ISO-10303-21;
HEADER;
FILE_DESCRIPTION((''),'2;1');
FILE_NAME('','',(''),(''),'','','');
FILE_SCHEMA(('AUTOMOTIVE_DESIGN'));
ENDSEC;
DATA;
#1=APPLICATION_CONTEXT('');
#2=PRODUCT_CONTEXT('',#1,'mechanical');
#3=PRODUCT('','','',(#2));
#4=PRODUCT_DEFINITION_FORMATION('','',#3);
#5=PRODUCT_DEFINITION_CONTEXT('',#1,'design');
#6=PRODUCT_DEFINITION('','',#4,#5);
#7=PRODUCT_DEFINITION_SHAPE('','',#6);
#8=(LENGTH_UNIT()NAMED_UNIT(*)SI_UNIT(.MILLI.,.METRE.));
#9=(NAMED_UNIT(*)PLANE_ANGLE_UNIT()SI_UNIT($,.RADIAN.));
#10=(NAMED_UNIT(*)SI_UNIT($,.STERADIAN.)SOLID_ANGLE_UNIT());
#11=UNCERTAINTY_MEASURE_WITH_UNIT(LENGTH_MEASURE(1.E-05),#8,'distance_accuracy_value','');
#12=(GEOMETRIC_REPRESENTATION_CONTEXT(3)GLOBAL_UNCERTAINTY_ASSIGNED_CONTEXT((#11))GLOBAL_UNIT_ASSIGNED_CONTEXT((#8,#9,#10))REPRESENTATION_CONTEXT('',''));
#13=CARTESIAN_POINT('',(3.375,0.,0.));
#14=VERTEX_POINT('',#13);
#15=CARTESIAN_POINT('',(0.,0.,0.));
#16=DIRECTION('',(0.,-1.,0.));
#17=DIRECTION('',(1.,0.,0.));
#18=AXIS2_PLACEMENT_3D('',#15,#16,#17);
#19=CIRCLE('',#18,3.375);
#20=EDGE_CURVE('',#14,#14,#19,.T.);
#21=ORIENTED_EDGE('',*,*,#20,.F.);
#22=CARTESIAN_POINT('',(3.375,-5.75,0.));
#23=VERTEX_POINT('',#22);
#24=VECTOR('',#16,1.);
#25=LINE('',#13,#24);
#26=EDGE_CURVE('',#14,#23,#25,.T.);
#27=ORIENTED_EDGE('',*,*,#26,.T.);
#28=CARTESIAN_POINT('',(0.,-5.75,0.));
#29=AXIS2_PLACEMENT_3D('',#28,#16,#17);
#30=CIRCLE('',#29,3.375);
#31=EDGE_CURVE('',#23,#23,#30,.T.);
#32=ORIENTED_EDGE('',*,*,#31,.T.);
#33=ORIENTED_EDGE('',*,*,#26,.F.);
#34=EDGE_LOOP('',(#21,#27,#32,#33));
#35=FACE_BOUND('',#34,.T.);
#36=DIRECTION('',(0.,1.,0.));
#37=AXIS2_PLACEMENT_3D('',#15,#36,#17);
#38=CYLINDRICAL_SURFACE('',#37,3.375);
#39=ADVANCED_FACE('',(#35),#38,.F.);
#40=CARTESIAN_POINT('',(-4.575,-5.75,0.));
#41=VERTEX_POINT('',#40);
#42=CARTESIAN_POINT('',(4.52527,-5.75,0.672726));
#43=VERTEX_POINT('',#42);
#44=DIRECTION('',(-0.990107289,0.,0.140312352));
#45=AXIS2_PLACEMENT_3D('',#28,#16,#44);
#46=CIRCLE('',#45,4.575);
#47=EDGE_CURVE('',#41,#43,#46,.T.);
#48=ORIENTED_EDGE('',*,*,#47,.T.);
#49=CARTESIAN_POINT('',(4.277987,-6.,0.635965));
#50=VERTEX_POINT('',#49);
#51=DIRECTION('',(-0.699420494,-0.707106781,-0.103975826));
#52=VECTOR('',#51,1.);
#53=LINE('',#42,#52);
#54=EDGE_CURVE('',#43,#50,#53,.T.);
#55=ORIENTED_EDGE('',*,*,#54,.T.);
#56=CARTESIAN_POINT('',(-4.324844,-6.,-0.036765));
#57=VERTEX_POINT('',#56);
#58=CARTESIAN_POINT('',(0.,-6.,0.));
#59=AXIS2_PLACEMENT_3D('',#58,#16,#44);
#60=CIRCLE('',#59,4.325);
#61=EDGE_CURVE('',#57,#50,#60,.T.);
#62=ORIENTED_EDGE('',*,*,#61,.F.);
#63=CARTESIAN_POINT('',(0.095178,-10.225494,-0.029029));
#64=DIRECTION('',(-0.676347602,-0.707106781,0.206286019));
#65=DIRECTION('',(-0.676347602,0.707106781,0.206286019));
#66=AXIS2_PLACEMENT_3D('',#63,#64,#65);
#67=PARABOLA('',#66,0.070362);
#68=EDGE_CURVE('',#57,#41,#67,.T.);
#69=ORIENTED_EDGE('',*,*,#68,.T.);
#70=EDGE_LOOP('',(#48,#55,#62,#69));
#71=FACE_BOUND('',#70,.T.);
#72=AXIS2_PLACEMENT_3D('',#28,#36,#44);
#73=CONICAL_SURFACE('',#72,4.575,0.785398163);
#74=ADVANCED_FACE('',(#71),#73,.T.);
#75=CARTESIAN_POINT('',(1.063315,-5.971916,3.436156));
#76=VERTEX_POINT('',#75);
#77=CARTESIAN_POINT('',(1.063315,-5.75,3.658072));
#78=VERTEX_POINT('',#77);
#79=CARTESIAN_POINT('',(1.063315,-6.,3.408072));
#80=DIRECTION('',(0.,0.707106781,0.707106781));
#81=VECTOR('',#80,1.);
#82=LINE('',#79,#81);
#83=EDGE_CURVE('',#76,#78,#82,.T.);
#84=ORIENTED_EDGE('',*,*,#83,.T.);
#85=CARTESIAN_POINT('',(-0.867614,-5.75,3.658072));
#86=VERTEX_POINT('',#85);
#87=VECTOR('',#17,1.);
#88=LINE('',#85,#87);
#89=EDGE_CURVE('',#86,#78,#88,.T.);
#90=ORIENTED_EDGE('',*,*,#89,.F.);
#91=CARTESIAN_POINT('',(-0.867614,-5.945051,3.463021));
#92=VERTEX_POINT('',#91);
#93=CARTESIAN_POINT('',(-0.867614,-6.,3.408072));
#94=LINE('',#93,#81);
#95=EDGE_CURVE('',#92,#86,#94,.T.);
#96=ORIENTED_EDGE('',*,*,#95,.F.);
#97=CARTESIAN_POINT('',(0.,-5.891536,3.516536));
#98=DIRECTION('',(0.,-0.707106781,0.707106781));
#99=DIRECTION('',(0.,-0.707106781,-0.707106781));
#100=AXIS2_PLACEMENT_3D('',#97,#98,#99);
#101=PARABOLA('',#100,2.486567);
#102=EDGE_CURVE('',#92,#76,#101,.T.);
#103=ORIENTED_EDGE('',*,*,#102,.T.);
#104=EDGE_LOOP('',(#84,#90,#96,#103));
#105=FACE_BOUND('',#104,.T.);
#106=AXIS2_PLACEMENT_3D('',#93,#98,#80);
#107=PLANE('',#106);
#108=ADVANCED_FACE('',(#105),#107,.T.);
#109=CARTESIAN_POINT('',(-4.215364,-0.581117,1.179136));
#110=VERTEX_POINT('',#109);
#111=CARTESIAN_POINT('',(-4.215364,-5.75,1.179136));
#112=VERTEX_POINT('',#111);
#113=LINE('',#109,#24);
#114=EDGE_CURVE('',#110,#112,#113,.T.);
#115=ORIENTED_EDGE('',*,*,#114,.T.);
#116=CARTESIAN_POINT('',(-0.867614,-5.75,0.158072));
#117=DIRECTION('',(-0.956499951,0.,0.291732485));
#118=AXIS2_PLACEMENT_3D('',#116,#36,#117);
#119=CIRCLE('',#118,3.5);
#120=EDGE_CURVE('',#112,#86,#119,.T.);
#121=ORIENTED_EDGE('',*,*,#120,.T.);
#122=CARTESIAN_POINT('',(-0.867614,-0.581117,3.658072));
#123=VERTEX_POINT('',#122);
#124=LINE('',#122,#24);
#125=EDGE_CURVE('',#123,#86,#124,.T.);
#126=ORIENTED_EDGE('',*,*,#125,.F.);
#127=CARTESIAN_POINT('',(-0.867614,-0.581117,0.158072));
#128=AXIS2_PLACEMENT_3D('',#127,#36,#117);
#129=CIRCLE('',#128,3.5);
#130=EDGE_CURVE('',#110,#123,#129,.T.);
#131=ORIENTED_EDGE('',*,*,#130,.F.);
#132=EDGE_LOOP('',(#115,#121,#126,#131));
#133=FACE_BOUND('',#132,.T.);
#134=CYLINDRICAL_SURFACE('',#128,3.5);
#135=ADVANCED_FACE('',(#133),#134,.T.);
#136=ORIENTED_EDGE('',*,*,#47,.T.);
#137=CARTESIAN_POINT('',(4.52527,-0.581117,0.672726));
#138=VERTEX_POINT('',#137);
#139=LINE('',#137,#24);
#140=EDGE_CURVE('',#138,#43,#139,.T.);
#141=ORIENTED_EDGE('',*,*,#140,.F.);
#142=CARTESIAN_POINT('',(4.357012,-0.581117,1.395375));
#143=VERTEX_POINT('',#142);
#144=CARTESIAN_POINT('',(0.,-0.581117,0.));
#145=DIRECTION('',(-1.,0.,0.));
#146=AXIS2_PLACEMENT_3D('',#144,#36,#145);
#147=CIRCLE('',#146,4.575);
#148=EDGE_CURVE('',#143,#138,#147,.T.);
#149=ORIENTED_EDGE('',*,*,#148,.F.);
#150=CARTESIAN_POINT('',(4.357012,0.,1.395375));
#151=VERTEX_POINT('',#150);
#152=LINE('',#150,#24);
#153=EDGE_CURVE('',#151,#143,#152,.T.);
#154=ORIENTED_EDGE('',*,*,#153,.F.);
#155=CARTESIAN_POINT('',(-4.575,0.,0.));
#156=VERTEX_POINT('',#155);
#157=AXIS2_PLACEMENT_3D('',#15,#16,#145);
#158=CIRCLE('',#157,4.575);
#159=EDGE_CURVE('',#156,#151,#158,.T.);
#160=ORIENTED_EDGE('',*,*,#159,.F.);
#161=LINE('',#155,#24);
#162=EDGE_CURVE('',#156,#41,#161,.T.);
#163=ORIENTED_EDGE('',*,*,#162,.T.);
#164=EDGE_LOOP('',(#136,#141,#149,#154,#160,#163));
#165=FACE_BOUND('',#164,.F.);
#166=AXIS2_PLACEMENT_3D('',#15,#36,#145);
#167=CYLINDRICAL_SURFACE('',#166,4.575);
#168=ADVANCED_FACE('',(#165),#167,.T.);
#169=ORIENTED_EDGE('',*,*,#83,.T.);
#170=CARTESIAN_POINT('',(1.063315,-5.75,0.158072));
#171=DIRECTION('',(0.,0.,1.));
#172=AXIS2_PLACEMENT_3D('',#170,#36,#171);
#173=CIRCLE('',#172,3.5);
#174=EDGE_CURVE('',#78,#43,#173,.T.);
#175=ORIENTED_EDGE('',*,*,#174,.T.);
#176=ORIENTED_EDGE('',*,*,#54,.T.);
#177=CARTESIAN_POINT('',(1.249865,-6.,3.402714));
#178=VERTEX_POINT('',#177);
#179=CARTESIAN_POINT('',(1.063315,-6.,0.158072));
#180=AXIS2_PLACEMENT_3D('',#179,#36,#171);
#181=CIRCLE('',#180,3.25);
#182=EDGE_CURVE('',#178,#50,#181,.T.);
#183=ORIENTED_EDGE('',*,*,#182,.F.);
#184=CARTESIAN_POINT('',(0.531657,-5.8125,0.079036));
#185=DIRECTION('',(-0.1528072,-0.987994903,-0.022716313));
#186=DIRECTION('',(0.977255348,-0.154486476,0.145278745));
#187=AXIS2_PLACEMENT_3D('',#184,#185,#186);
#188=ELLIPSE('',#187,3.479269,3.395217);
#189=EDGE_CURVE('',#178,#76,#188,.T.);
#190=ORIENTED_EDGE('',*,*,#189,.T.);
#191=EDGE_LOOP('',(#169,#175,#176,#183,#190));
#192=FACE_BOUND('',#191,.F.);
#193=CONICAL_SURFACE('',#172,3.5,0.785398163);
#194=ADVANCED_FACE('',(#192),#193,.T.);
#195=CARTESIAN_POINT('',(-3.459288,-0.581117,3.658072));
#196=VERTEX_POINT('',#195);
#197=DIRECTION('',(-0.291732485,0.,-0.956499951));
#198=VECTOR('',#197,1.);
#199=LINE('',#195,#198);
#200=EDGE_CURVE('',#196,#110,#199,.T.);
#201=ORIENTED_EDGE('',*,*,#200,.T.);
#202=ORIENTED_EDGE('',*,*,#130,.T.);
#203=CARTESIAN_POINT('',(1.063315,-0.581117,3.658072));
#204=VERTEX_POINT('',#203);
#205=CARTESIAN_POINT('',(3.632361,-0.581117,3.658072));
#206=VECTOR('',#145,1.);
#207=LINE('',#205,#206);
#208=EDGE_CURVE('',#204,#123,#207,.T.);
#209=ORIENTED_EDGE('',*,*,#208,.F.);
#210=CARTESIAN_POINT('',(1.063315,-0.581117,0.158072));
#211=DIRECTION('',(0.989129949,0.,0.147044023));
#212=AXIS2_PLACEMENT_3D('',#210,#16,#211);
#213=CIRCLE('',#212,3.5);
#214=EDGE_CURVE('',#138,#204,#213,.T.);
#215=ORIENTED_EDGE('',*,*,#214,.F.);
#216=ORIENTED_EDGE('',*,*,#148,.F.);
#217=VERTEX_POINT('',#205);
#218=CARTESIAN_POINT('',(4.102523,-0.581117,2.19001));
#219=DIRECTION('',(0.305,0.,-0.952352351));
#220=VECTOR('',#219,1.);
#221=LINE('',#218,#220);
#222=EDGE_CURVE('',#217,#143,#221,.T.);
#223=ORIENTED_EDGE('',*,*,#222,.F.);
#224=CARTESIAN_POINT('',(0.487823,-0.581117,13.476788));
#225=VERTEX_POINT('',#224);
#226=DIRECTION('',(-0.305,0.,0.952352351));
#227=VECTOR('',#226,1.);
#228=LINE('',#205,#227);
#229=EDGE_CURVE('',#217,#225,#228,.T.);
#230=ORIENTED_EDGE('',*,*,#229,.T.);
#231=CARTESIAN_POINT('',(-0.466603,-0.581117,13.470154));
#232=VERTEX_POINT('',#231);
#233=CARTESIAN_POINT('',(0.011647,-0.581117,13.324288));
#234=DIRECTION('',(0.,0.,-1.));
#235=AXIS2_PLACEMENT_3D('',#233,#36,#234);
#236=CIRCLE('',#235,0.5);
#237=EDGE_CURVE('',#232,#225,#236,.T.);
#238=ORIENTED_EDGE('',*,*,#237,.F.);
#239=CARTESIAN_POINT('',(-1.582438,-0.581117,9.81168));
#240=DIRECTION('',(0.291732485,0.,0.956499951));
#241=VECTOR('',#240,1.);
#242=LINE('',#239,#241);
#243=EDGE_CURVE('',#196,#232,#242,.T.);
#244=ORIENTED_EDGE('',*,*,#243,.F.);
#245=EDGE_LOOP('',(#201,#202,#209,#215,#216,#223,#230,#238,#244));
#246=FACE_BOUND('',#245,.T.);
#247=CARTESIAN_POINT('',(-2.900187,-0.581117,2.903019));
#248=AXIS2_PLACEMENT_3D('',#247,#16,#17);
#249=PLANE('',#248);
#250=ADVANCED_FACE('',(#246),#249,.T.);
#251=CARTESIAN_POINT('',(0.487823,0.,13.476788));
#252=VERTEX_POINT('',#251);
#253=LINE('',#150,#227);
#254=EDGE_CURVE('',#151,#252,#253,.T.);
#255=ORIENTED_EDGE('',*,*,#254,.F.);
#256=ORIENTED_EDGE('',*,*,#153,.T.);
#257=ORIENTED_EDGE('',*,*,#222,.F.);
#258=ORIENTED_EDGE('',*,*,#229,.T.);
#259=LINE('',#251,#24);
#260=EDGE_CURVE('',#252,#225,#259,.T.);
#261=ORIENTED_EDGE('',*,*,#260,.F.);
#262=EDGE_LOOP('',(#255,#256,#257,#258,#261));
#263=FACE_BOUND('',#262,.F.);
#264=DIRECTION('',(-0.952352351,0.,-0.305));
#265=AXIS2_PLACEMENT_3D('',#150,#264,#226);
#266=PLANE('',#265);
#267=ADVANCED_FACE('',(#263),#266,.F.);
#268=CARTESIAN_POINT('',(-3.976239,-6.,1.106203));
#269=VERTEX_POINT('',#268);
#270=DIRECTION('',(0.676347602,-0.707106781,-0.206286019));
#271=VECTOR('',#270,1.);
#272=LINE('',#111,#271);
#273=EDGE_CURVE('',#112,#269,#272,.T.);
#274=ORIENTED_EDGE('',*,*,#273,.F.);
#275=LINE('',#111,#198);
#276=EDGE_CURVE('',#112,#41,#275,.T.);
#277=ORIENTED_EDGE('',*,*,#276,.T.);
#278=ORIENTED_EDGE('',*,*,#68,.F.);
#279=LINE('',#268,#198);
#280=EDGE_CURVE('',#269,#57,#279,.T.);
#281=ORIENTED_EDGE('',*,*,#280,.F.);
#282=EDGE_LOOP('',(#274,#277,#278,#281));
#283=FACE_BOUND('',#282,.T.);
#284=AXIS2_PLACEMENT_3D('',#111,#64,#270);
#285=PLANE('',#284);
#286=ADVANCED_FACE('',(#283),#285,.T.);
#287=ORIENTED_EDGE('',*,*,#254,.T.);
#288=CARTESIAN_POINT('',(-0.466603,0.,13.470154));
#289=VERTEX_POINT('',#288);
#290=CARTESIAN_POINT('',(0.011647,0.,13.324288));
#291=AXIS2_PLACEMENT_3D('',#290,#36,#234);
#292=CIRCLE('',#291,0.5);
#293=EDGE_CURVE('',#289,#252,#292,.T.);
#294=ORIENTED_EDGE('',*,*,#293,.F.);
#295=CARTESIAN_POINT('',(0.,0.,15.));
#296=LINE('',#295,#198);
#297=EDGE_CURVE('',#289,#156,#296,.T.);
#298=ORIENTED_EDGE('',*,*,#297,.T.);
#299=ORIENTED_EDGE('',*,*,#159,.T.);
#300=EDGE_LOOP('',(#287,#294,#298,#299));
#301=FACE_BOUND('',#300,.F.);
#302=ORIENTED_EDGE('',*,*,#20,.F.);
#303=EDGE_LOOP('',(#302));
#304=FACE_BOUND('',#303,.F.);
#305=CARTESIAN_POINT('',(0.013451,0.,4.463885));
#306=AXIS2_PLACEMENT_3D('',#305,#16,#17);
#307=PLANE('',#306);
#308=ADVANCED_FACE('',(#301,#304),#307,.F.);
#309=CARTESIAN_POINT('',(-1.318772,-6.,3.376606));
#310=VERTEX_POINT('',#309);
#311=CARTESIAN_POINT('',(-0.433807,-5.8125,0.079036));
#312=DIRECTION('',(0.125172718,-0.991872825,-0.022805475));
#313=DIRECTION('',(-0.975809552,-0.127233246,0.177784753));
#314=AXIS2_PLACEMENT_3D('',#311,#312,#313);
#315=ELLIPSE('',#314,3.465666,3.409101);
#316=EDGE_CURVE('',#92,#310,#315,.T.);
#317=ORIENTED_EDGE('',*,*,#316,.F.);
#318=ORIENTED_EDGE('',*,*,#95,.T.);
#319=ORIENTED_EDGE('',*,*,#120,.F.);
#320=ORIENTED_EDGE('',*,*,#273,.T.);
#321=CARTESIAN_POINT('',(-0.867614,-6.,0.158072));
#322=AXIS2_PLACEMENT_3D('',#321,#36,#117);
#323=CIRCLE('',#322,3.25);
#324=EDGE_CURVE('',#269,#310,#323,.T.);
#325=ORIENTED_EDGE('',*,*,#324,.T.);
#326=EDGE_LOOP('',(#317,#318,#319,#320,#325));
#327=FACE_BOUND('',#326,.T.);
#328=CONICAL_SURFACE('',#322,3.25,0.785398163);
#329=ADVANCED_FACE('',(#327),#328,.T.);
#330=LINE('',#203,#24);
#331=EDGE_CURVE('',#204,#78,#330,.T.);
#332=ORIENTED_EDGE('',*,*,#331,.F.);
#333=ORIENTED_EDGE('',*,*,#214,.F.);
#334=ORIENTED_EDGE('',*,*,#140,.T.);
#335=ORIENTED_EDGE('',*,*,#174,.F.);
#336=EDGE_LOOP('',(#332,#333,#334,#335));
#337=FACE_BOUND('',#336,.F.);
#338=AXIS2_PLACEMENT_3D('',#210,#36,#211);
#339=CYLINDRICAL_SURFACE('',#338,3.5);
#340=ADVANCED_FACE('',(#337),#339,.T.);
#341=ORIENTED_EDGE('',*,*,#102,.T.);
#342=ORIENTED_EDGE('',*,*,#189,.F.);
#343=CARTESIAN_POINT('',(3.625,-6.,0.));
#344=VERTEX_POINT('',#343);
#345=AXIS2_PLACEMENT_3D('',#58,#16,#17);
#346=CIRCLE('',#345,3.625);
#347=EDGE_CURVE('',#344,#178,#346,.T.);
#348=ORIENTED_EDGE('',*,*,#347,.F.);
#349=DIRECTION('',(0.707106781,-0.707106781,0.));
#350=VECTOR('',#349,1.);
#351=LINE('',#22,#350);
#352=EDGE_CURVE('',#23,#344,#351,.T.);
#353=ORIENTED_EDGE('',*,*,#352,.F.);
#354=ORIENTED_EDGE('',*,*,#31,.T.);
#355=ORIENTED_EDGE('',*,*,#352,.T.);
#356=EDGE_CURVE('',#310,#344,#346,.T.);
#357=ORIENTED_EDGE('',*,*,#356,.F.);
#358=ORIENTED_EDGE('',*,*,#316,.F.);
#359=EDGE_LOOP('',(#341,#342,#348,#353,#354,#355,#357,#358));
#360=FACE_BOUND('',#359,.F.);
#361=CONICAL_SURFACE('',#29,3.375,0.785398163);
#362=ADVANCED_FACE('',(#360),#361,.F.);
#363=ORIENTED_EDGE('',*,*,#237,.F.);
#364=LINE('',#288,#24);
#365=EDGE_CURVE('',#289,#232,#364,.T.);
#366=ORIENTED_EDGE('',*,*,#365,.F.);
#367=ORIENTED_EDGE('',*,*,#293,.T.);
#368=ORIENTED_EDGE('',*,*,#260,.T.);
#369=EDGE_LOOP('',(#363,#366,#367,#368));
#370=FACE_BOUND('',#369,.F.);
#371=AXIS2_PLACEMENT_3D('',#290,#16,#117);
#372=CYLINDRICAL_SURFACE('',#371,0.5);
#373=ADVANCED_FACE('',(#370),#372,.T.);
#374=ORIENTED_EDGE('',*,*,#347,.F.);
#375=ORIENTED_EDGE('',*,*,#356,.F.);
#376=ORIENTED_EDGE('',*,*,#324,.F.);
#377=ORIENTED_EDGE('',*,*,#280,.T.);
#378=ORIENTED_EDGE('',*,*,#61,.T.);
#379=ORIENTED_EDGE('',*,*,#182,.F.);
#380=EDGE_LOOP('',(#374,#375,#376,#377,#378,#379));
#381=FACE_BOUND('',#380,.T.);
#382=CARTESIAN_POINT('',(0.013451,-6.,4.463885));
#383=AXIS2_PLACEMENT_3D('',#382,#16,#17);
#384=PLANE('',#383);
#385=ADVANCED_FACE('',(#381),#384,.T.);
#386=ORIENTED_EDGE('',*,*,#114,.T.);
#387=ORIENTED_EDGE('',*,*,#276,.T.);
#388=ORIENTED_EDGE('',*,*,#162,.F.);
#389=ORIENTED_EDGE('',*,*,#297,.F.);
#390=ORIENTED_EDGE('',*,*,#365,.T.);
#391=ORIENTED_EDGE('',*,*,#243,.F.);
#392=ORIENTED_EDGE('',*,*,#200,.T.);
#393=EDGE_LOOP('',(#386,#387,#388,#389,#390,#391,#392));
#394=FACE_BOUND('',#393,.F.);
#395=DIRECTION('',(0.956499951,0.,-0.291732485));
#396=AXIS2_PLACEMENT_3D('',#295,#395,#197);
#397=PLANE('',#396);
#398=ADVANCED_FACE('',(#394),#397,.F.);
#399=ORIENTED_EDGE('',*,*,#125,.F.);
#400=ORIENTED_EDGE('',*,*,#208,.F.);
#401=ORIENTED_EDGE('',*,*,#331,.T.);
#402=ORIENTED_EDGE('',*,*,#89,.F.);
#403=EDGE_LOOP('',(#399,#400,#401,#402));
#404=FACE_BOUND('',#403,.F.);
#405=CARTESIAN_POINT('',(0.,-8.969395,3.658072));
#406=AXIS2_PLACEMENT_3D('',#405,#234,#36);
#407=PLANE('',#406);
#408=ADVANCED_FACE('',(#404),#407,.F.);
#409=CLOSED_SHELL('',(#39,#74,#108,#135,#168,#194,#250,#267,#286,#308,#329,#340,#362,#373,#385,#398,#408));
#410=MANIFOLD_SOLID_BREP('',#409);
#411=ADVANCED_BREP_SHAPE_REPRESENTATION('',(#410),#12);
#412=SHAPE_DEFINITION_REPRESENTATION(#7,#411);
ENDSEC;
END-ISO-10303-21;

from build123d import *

# Parameters (mm, degrees)
F0_R          = 3.375
F1_DEPTH      = 6
F2_W          = 8.3882776671
F2_H          = 17.9039358627
F3_DEPTH      = 4.576
F3_DEPTH_BACK = 25
F4_T1_DEPTH   = 13.2089304981
F4_T3_DEPTH   = 11.8980683562
F5_R          = 0.5
F6_T1_DEPTH   = 1.9309283779
F6_T3_DEPTH   = 2.3257264643
F6_T8_ANGLE   = 73.0382941175
F6_T10_ANGLE  = 81.5443380081
F6_T12_ANGLE  = 196.5215831172


# Not quite as in the source:
# - a fillet or chamfer that OpenCascade refuses, or shapes differently, is made with other operations: its cross-section is extruded or revolved along the edge and cut away or added


with BuildPart() as f1:
    # F0 (on Front) → F1 (new body)
    with BuildSketch(Plane.XZ):
        with BuildLine():
            Line((0, 15), (-4.575, 0))
            ThreePointArc((-4.575, 0), (0.7061497994, -4.5201744945), (4.3570120047, 1.395375))
            Line((4.3570120047, 1.395375), (0, 15))
        make_face()
        Circle(F0_R, mode=Mode.SUBTRACT)
    extrude(amount=F1_DEPTH)

    # F2 (on Right) → F3 (cut, two sides)
    with BuildSketch(Plane.YZ) as f3_sk:
        with Locations((-4.7752561222, 12.6100402558)):
            Rectangle(F2_W, F2_H)
    extrude(amount=-F3_DEPTH, mode=Mode.SUBTRACT)
    extrude(f3_sk.sketch, amount=F3_DEPTH_BACK, mode=Mode.SUBTRACT)

    # F4: fillet of radius 3.5 on 2 edges, made by hand

    # F4_s2 → F4_t1 (cut)
    with BuildSketch(Plane.XZ.offset(0.5811172887)):
        with BuildLine():
            ThreePointArc((4.5252695152, 0.6727264041), (3.3489995726, 2.8086655863), (1.0633146948, 3.6580723245))
            Line((1.0633146948, 3.6580723245), (1.0633146948, 4.0080723245))
            Line((1.0633146948, 4.0080723245), (3.6323614241, 4.0080723245))
            Line((3.6323614241, 4.0080723245), (3.9656847468, 3.7648223245))
            ThreePointArc((3.9656847468, 3.7648223245), (4.6903353275, 1.502125), (4.8714649972, 0.7241918121))
            Line((4.8714649972, 0.7241918121), (4.5252695152, 0.6727264041))
        make_face()
    extrude(amount=F4_T1_DEPTH, mode=Mode.SUBTRACT)

    # F4_s4 → F4_t3 (cut)
    with BuildSketch(Plane.XZ.offset(0.5811172887)):
        with BuildLine():
            ThreePointArc((-4.2153635131, 1.1791360226), (-2.9504335333, 2.9708754587), (-0.8676136831, 3.6580723245))
            Line((-0.8676136831, 3.6580723245), (-3.459287941, 3.6580723245))
            Line((-3.459287941, 3.6580723245), (-4.2153635131, 1.1791360226))
        make_face()
    extrude(amount=F4_T3_DEPTH, mode=Mode.SUBTRACT)

    # F5
    f5_edges = [f1.edges().sort_by_distance(p)[0] for p in [
        (0, -0.290559, 15),
    ]]
    fillet(f5_edges, radius=F5_R)

    # F6: chamfer of 0.25 on 6 edges, made by hand

    # F6_s2 → F6_t1 (cut)
    with BuildSketch(Plane.YZ.offset(-0.8676136831)):
        Polygon((-6, 3.4080723245), (-5.75, 3.6580723245), (-6, 3.6580723245), align=None)
    extrude(amount=F6_T1_DEPTH, mode=Mode.SUBTRACT)

    # F6_s4 → F6_t3 (cut)
    with BuildSketch(Plane(origin=(-0.0297318944, 0, -0.0974816211), x_dir=(0, 1, 0), z_dir=(-0.2917324852, 0, -0.9564999514))):
        Polygon((-5.75, -4.3759872778), (-6, -4.1259872778), (-6, -4.3759872778), align=None)
    extrude(amount=F6_T3_DEPTH, mode=Mode.SUBTRACT)

    # F6_s5 → F6_t6 (revolve, cut)
    with BuildSketch(Plane.XY):
        Polygon((3.375, -5.75), (3.625, -6), (3.375, -6), align=None)
    revolve(axis=Axis((0, -6, 0), (0, -1, 0)), mode=Mode.SUBTRACT)

    # F6_s7 → F6_t8 (revolve, cut)
    with BuildSketch(Plane(origin=(-0.0297318944, 0, -0.0974816209), x_dir=(0, 1, 0), z_dir=(-0.2917324851, 0, -0.9564999514))):
        Polygon((-6, -4.1259872778), (-5.75, -4.3759872778), (-6, -4.3759872778), align=None)
    revolve(axis=Axis((-0.8676136832, -6, 0.1580723246), (0, 1, 0)), revolution_arc=F6_T8_ANGLE, mode=Mode.SUBTRACT)

    # F6_s9 → F6_t10 (revolve, cut)
    with BuildSketch(Plane.YZ.offset(1.0633146948)):
        Polygon((-5.75, 3.6580723245), (-6, 3.4080723245), (-6, 3.6580723245), align=None)
    revolve(axis=Axis((1.0633146948, -6, 0.1580723245), (0, 1, 0)), revolution_arc=F6_T10_ANGLE, mode=Mode.SUBTRACT)

    # F6_s11 → F6_t12 (revolve, cut)
    with BuildSketch(Plane(origin=(0, 0, 0), x_dir=(0, 1, 0), z_dir=(0.1403123523, 0, 0.990107289))):
        Polygon((-5.75, 4.575), (-6, 4.325), (-6, 4.575), align=None)
    revolve(axis=Axis((0, -6, 0), (0, -1, 0)), revolution_arc=F6_T12_ANGLE, mode=Mode.SUBTRACT)


solid = f1.part
